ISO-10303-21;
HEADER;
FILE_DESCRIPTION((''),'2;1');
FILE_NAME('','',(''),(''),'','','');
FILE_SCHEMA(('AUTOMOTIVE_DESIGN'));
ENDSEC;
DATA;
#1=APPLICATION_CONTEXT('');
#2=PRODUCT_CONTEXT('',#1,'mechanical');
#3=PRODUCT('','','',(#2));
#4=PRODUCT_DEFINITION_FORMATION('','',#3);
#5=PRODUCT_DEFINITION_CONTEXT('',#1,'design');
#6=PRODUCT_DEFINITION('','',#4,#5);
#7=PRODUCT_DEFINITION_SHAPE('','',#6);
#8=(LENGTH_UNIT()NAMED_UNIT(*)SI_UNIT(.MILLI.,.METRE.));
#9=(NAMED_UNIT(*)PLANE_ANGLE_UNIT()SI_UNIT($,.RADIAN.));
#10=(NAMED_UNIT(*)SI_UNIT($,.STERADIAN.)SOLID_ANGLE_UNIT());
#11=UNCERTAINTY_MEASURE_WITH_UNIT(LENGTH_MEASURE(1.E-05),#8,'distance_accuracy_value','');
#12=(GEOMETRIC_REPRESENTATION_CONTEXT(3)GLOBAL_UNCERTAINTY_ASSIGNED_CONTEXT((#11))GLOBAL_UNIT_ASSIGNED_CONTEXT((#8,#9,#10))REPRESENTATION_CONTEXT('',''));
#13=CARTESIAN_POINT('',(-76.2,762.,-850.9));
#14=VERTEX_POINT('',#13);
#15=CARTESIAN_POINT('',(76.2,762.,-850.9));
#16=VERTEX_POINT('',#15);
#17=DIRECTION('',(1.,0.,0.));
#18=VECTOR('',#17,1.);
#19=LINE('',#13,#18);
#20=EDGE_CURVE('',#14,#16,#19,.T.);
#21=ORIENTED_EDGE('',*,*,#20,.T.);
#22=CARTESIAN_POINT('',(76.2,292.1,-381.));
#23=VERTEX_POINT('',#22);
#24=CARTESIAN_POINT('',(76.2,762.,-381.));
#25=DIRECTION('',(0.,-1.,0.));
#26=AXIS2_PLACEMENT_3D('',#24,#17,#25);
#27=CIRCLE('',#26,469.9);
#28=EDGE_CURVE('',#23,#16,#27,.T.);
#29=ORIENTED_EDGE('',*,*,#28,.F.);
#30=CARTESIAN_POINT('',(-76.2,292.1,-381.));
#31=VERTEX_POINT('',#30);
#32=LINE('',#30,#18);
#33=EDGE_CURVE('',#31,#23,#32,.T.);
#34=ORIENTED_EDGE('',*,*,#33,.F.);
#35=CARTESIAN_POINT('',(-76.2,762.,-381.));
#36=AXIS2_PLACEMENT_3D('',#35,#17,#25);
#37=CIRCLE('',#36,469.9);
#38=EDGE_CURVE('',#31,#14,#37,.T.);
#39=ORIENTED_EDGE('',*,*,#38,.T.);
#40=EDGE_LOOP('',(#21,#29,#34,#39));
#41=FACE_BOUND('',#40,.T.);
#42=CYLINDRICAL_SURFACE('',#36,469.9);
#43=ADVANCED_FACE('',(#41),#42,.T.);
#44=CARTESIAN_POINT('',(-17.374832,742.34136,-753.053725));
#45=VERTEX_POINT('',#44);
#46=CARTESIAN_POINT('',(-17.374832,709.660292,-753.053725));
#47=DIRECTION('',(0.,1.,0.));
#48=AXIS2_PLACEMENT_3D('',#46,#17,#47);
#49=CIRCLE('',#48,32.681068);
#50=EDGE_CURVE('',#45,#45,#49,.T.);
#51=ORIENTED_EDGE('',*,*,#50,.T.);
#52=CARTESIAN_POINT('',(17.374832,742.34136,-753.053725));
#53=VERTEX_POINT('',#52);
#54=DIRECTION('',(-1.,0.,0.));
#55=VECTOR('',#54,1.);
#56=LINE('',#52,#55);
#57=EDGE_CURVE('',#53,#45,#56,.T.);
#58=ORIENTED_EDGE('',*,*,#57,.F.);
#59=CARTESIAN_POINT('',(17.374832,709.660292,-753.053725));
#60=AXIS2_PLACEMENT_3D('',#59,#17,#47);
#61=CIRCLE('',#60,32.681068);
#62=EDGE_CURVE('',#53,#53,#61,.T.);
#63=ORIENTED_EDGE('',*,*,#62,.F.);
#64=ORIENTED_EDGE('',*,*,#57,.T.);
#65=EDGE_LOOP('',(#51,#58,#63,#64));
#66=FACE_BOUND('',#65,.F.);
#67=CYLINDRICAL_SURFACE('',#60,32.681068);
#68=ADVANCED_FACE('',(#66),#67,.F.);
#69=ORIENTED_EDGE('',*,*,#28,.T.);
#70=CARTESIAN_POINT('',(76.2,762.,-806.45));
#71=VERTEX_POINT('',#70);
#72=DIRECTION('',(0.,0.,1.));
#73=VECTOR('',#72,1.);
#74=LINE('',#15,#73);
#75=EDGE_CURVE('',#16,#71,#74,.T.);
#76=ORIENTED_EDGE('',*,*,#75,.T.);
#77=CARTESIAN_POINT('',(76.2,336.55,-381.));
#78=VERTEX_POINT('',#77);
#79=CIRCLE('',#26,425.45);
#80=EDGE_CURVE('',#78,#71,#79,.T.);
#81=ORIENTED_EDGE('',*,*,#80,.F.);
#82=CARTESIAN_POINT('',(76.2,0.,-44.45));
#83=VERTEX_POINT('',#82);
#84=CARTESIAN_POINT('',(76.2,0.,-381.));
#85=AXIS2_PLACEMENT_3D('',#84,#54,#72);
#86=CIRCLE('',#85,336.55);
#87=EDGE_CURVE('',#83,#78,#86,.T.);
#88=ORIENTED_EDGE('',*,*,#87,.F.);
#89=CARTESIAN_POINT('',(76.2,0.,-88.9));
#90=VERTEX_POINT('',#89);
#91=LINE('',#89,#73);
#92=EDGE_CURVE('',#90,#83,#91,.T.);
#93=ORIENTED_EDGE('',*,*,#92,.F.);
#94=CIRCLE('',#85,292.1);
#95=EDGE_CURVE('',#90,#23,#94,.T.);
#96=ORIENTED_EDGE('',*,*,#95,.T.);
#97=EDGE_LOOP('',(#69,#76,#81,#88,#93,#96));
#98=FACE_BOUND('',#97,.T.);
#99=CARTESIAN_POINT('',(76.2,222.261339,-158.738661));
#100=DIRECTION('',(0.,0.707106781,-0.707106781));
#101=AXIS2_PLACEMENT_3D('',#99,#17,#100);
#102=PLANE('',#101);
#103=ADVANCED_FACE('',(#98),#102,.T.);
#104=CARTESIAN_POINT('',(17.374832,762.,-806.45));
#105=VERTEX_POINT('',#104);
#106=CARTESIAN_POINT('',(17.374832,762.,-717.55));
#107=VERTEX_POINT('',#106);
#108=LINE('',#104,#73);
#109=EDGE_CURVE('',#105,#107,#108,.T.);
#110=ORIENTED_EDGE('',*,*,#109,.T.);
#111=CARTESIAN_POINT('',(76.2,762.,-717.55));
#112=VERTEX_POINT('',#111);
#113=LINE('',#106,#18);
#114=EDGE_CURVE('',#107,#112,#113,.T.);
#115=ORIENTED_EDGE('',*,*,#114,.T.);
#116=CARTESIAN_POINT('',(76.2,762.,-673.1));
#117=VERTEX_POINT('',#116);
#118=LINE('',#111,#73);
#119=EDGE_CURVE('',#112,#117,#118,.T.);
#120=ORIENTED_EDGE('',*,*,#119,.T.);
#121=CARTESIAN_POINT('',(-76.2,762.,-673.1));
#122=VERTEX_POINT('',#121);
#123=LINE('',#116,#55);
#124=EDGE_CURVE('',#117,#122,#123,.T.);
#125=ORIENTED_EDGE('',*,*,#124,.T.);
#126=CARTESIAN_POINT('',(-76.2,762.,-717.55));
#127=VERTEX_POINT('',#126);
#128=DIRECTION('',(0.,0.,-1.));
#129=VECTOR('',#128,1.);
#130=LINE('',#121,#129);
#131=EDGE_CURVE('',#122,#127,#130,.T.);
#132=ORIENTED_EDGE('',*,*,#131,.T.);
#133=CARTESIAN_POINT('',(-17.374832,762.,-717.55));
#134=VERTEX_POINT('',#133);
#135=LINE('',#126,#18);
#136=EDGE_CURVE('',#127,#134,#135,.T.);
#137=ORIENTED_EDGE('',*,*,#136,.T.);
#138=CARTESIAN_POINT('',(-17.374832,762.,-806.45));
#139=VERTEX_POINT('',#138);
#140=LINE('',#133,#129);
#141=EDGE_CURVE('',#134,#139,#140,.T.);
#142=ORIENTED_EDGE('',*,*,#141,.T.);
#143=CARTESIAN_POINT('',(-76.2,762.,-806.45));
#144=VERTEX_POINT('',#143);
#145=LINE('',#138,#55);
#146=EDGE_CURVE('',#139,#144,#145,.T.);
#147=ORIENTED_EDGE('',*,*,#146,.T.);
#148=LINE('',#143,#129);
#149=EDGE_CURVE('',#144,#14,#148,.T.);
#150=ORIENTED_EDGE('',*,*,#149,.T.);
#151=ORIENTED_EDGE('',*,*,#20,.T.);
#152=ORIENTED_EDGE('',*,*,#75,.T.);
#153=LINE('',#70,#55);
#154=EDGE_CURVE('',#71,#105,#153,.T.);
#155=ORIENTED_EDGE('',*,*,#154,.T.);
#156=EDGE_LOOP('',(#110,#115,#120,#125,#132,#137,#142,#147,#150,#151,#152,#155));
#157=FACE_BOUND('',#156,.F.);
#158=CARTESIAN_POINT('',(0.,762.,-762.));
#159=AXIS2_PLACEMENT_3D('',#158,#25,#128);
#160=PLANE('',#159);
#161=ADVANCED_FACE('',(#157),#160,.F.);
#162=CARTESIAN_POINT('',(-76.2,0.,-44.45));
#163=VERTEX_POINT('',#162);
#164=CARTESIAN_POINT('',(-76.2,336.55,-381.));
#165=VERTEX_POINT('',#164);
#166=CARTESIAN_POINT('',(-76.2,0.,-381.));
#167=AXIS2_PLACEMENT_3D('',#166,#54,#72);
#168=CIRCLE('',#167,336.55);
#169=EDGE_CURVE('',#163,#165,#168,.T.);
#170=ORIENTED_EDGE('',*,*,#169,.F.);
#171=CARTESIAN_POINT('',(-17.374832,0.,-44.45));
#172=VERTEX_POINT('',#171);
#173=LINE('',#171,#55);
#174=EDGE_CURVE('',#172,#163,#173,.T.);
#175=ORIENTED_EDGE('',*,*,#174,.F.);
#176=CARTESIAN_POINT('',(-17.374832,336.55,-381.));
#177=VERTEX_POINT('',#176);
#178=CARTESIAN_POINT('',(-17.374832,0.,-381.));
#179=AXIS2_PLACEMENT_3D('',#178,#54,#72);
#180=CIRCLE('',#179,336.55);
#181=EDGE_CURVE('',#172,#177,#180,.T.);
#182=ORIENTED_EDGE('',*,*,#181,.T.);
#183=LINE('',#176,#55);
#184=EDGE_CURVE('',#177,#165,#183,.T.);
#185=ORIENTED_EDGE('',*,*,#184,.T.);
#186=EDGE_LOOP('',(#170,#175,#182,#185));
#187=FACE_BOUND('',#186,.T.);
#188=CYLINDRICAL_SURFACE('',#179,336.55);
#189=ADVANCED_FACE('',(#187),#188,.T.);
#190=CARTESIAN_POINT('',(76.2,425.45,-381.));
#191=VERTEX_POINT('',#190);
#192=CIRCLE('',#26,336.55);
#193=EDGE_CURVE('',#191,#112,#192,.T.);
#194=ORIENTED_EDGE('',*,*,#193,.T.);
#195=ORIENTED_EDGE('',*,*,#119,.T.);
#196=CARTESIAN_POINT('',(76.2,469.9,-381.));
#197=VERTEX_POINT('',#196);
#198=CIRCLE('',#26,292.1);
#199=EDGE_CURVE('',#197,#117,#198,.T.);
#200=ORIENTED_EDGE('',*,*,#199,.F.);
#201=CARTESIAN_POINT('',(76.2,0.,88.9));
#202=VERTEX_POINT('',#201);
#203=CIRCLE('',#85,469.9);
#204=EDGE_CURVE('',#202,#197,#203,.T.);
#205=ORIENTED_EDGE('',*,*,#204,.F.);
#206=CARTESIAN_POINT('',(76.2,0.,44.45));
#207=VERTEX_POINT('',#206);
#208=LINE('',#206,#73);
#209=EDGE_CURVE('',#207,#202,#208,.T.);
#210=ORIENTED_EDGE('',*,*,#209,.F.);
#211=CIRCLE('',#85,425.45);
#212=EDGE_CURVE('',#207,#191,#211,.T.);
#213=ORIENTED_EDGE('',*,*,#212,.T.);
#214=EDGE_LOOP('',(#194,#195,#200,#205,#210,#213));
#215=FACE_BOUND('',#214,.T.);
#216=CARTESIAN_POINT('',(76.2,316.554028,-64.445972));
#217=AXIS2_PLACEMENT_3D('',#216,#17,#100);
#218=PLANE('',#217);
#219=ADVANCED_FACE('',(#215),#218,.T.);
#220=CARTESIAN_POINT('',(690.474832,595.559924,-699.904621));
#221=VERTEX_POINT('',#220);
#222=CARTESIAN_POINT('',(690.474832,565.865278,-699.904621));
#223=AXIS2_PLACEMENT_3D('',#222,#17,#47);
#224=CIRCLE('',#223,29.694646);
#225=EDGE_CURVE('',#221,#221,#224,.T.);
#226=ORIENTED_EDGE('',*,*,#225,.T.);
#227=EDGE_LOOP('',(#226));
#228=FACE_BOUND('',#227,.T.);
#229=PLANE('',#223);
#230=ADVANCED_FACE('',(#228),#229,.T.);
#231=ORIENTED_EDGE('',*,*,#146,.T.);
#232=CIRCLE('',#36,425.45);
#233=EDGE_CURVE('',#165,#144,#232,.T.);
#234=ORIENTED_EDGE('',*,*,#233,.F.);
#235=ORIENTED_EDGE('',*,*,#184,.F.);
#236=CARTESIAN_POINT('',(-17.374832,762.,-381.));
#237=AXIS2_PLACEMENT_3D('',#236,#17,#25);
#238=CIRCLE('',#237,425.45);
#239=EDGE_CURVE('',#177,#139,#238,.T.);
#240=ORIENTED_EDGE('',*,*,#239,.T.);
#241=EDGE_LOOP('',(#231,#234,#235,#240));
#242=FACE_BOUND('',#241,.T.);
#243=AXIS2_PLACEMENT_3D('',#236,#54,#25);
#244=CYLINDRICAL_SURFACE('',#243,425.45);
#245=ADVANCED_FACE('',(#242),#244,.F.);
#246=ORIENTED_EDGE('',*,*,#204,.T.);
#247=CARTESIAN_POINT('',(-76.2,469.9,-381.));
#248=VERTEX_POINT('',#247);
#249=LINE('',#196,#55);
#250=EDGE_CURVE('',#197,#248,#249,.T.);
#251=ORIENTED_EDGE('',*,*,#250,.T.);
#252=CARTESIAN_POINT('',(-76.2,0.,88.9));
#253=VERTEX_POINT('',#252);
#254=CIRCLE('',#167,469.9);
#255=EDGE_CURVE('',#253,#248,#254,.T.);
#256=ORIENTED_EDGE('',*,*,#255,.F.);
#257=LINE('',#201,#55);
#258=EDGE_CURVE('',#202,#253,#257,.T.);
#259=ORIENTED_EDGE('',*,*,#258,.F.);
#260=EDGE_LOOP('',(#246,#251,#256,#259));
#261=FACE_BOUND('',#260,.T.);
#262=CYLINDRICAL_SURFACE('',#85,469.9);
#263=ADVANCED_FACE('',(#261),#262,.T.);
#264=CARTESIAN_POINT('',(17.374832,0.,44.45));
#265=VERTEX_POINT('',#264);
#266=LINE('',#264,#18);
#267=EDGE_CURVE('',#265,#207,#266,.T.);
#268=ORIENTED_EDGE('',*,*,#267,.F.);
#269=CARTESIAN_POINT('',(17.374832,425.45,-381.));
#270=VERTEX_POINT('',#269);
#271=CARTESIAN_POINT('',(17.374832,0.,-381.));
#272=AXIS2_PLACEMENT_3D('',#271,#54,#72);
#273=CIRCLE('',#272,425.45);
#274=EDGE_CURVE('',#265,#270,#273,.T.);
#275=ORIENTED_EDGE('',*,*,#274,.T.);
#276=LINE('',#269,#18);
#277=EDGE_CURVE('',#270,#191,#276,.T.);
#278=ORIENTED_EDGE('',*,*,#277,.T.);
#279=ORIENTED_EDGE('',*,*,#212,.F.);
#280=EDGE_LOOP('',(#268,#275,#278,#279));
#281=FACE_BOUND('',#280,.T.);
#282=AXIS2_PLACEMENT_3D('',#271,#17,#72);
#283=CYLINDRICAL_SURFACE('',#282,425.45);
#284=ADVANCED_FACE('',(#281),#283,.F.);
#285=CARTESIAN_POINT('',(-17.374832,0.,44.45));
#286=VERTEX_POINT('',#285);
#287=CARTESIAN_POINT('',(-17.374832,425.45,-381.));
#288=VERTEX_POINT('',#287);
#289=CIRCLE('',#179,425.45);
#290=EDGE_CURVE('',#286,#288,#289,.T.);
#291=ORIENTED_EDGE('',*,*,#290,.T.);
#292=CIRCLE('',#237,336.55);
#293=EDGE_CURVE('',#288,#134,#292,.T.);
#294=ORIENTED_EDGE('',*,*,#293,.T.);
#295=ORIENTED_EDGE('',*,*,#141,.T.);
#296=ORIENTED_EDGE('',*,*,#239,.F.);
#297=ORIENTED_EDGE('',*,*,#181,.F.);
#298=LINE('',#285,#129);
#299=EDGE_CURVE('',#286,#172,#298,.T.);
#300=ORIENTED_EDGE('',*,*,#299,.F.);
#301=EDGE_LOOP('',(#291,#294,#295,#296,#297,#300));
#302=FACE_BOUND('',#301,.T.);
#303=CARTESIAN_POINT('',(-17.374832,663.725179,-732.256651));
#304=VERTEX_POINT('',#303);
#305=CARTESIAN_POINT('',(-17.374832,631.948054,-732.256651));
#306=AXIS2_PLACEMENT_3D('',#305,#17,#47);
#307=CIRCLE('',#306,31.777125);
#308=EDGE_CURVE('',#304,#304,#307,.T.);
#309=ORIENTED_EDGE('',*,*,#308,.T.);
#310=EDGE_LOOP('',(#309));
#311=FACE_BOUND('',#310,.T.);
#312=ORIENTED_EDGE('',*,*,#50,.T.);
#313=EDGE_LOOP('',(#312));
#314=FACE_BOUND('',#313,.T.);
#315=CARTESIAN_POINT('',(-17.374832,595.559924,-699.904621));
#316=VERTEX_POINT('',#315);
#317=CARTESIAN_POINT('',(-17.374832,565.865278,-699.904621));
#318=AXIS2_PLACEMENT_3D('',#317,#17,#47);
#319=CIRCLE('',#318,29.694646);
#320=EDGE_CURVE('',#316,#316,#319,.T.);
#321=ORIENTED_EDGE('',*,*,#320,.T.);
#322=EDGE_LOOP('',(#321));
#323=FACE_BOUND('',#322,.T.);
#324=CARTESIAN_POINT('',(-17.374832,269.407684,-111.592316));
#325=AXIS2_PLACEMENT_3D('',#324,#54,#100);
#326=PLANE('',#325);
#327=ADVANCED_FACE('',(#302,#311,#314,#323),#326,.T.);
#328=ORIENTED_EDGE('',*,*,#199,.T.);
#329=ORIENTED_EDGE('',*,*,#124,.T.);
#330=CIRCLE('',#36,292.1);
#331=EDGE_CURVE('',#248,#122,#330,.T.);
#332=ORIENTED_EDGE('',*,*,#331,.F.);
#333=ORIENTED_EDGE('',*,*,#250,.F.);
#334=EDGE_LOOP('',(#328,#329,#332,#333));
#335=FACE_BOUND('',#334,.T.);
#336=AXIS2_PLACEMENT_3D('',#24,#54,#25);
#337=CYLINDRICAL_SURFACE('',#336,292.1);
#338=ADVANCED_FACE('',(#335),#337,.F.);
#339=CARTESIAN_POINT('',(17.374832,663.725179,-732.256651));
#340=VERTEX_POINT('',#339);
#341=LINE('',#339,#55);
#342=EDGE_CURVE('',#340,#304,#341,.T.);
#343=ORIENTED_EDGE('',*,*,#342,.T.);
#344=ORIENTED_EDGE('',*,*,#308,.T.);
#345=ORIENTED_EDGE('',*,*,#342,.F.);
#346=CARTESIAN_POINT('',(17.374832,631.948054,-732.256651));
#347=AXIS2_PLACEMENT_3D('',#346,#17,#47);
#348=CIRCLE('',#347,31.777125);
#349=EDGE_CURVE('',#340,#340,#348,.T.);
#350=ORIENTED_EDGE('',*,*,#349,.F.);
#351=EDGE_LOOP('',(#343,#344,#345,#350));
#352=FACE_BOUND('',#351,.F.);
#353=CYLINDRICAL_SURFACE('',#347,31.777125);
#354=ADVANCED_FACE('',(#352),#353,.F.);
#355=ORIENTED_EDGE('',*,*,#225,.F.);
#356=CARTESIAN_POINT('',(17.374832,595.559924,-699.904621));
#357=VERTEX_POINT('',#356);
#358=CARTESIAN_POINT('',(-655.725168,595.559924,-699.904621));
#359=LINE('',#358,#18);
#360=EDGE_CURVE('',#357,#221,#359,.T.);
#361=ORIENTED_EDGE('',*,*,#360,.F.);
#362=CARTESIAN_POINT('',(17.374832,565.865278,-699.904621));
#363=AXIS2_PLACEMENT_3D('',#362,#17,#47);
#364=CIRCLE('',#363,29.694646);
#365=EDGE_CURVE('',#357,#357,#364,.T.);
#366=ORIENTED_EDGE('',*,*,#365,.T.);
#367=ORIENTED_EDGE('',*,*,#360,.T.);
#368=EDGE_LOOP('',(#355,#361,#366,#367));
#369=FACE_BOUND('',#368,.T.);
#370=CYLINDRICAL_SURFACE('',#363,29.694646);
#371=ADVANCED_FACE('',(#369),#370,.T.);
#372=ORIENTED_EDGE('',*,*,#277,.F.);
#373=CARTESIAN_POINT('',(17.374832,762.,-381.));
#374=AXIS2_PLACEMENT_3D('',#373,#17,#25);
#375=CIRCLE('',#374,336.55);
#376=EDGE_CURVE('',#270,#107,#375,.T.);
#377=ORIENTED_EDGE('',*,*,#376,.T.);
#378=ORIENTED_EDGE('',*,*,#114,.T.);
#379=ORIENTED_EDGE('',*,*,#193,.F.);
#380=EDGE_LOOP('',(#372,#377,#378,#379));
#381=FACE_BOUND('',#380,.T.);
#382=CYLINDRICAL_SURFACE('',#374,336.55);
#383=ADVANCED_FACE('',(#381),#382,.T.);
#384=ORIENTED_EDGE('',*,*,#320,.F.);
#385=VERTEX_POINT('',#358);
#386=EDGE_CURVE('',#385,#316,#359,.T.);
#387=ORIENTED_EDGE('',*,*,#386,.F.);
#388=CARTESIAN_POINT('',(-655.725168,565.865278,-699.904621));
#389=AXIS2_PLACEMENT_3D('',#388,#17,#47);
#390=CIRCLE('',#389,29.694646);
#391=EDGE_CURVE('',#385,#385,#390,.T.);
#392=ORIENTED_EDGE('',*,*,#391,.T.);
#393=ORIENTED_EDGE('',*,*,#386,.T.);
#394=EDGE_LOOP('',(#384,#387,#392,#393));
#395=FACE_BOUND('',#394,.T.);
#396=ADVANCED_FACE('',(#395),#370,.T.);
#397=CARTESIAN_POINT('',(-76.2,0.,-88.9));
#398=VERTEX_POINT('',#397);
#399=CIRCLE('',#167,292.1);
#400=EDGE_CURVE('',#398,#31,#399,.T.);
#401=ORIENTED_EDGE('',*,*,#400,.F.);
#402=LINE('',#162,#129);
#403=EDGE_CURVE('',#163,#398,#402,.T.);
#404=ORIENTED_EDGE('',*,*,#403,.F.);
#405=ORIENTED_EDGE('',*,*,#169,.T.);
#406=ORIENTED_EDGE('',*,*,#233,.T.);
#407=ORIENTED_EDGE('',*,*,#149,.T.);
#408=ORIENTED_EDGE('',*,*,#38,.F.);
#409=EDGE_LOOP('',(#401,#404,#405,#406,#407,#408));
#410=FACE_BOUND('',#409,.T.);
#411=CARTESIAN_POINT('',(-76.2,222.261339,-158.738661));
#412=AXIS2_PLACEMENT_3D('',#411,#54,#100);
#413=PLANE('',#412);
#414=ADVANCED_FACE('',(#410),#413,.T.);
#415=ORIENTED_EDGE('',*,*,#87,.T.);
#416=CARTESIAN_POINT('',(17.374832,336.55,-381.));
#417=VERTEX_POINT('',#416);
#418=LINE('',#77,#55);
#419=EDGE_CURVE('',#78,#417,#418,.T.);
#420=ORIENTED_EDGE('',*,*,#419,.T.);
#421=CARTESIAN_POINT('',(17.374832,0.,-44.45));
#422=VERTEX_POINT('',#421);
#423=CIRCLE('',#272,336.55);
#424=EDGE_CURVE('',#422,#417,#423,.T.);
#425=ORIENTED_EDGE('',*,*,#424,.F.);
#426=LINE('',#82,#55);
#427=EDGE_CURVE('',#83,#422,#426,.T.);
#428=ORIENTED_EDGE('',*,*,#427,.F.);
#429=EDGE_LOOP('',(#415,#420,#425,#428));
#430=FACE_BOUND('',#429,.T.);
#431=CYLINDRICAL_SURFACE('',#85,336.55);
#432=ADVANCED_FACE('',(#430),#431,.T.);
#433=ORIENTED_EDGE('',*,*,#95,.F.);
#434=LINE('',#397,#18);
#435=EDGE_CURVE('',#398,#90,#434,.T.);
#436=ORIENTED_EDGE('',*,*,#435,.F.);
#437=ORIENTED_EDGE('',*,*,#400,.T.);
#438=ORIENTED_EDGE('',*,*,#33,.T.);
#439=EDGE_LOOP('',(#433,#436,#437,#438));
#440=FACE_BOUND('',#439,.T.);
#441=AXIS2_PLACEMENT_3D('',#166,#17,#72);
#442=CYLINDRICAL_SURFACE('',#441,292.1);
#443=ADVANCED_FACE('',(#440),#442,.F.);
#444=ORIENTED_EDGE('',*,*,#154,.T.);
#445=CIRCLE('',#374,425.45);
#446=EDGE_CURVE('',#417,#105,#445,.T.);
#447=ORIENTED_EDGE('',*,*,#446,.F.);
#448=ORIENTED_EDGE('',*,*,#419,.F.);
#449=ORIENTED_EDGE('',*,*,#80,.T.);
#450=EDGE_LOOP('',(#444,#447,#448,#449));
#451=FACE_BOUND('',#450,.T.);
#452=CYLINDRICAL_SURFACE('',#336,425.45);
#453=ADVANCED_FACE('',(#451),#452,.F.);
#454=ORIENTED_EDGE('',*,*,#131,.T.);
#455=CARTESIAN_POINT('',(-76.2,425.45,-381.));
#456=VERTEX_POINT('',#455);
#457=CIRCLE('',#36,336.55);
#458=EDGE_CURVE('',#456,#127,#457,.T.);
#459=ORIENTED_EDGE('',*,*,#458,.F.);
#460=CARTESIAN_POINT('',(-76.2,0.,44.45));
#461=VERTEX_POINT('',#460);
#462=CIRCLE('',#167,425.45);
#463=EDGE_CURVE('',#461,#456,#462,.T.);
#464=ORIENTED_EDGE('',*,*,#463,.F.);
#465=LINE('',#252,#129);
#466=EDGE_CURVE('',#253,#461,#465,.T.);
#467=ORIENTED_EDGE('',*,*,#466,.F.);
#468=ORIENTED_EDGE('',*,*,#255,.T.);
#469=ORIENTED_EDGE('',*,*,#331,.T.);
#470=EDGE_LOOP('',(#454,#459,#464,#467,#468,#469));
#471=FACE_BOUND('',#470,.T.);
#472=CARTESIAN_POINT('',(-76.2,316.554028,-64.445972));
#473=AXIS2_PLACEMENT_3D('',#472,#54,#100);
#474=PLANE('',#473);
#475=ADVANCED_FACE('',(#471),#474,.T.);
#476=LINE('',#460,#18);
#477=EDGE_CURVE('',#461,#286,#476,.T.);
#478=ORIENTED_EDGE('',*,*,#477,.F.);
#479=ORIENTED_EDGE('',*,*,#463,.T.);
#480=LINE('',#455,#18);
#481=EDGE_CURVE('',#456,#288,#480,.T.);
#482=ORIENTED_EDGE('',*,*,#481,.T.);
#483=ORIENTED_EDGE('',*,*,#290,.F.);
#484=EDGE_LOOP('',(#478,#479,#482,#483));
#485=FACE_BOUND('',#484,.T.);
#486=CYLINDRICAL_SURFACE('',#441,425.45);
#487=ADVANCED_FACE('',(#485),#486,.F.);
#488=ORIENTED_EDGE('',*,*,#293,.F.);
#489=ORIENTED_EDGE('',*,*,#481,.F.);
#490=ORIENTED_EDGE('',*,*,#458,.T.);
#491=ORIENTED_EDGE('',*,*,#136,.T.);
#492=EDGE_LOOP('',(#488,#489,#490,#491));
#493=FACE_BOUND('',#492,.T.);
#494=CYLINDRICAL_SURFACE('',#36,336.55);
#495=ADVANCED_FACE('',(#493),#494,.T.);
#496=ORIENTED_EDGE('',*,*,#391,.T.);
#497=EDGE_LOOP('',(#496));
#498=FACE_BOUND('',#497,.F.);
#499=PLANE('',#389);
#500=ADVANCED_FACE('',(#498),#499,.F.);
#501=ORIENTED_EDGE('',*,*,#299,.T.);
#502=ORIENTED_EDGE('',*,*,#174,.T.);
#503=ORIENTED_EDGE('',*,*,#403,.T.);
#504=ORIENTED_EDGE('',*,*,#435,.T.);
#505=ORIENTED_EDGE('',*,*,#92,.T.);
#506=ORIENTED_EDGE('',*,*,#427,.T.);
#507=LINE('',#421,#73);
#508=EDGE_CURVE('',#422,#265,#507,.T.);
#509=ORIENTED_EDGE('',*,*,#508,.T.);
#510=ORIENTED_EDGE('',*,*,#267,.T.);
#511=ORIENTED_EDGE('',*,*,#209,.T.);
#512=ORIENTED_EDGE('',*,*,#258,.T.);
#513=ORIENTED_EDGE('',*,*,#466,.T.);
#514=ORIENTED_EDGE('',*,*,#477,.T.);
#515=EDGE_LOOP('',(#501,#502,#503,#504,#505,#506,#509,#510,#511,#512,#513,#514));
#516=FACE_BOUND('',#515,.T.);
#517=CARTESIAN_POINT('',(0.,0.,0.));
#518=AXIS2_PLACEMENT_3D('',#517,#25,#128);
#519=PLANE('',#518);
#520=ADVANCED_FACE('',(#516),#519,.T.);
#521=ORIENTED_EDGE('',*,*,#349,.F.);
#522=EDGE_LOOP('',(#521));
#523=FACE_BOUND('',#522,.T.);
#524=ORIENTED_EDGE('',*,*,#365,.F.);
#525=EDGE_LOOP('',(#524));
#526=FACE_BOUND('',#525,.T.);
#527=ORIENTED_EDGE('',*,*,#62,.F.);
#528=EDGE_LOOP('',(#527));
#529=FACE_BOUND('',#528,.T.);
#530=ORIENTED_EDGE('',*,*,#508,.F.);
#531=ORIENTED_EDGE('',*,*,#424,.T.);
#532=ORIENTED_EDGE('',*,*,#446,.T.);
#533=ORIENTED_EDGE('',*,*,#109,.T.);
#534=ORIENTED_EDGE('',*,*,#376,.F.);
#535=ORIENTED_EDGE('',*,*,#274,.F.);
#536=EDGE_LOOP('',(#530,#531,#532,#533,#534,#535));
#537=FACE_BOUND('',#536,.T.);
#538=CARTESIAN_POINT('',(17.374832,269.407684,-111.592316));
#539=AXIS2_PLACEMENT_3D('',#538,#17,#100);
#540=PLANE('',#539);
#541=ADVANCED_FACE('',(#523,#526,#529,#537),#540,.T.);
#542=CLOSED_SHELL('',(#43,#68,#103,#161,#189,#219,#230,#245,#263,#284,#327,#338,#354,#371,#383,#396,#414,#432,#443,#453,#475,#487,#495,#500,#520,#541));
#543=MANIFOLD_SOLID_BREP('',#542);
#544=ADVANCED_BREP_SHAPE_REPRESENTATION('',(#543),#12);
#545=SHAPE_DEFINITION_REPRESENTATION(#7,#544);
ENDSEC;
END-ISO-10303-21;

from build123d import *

# Parameters (mm, degrees)
F3_R     = 29.6946462183
F4_DEPTH = 673.1
F5_R     = 31.777125294
F5_R_2   = 32.6810684337
F6_DEPTH = 673.101


# Not quite as in the source:
# - a feature of the source that left no trace in its solid (it failed there, or was rolled back) is left out


with BuildPart() as f2:
    # F2: sweep along a path in F1
    with BuildLine(Plane.YZ) as f2_path:
        ThreePointArc((0, 0), (269.4076836321, -111.5923163679), (381, -381))
        ThreePointArc((381, -381), (492.5923163679, -650.4076836321), (762, -762))
    # F0 (on Front) → F2 (sweep)
    with BuildSketch(Plane.XZ):
        Polygon((76.2, 88.9), (0, 88.9), (-76.2, 88.9), (-76.2, 44.45), (-17.3748321831, 44.45), (-17.3748321831, 0), (-17.3748321831, -44.45), (-76.2, -44.45), (-76.2, -88.9), (0, -88.9), (76.2, -88.9), (76.2, -44.45), (17.3748321831, -44.45), (17.3748321831, 0), (17.3748321831, 44.45), (76.2, 44.45), align=None)
    sweep(path=f2_path.line)

    # F3 (on face) → F4 (join, symmetric)
    with BuildSketch(Plane.YZ.offset(17.3748321831)):
        with Locations((565.865278244, -699.9046206474)):
            Circle(F3_R)
    extrude(amount=F4_DEPTH, both=True)

    # F5 (on face) → F6 (cut, through all)
    with BuildSketch(Plane.YZ.offset(17.3748321831)):
        with Locations((631.9480538368, -732.2566509247)):
            Circle(F5_R)
        with Locations((709.6602916718, -753.0537247658)):
            Circle(F5_R_2)
    extrude(amount=-F6_DEPTH, mode=Mode.SUBTRACT)


solid = f2.part
